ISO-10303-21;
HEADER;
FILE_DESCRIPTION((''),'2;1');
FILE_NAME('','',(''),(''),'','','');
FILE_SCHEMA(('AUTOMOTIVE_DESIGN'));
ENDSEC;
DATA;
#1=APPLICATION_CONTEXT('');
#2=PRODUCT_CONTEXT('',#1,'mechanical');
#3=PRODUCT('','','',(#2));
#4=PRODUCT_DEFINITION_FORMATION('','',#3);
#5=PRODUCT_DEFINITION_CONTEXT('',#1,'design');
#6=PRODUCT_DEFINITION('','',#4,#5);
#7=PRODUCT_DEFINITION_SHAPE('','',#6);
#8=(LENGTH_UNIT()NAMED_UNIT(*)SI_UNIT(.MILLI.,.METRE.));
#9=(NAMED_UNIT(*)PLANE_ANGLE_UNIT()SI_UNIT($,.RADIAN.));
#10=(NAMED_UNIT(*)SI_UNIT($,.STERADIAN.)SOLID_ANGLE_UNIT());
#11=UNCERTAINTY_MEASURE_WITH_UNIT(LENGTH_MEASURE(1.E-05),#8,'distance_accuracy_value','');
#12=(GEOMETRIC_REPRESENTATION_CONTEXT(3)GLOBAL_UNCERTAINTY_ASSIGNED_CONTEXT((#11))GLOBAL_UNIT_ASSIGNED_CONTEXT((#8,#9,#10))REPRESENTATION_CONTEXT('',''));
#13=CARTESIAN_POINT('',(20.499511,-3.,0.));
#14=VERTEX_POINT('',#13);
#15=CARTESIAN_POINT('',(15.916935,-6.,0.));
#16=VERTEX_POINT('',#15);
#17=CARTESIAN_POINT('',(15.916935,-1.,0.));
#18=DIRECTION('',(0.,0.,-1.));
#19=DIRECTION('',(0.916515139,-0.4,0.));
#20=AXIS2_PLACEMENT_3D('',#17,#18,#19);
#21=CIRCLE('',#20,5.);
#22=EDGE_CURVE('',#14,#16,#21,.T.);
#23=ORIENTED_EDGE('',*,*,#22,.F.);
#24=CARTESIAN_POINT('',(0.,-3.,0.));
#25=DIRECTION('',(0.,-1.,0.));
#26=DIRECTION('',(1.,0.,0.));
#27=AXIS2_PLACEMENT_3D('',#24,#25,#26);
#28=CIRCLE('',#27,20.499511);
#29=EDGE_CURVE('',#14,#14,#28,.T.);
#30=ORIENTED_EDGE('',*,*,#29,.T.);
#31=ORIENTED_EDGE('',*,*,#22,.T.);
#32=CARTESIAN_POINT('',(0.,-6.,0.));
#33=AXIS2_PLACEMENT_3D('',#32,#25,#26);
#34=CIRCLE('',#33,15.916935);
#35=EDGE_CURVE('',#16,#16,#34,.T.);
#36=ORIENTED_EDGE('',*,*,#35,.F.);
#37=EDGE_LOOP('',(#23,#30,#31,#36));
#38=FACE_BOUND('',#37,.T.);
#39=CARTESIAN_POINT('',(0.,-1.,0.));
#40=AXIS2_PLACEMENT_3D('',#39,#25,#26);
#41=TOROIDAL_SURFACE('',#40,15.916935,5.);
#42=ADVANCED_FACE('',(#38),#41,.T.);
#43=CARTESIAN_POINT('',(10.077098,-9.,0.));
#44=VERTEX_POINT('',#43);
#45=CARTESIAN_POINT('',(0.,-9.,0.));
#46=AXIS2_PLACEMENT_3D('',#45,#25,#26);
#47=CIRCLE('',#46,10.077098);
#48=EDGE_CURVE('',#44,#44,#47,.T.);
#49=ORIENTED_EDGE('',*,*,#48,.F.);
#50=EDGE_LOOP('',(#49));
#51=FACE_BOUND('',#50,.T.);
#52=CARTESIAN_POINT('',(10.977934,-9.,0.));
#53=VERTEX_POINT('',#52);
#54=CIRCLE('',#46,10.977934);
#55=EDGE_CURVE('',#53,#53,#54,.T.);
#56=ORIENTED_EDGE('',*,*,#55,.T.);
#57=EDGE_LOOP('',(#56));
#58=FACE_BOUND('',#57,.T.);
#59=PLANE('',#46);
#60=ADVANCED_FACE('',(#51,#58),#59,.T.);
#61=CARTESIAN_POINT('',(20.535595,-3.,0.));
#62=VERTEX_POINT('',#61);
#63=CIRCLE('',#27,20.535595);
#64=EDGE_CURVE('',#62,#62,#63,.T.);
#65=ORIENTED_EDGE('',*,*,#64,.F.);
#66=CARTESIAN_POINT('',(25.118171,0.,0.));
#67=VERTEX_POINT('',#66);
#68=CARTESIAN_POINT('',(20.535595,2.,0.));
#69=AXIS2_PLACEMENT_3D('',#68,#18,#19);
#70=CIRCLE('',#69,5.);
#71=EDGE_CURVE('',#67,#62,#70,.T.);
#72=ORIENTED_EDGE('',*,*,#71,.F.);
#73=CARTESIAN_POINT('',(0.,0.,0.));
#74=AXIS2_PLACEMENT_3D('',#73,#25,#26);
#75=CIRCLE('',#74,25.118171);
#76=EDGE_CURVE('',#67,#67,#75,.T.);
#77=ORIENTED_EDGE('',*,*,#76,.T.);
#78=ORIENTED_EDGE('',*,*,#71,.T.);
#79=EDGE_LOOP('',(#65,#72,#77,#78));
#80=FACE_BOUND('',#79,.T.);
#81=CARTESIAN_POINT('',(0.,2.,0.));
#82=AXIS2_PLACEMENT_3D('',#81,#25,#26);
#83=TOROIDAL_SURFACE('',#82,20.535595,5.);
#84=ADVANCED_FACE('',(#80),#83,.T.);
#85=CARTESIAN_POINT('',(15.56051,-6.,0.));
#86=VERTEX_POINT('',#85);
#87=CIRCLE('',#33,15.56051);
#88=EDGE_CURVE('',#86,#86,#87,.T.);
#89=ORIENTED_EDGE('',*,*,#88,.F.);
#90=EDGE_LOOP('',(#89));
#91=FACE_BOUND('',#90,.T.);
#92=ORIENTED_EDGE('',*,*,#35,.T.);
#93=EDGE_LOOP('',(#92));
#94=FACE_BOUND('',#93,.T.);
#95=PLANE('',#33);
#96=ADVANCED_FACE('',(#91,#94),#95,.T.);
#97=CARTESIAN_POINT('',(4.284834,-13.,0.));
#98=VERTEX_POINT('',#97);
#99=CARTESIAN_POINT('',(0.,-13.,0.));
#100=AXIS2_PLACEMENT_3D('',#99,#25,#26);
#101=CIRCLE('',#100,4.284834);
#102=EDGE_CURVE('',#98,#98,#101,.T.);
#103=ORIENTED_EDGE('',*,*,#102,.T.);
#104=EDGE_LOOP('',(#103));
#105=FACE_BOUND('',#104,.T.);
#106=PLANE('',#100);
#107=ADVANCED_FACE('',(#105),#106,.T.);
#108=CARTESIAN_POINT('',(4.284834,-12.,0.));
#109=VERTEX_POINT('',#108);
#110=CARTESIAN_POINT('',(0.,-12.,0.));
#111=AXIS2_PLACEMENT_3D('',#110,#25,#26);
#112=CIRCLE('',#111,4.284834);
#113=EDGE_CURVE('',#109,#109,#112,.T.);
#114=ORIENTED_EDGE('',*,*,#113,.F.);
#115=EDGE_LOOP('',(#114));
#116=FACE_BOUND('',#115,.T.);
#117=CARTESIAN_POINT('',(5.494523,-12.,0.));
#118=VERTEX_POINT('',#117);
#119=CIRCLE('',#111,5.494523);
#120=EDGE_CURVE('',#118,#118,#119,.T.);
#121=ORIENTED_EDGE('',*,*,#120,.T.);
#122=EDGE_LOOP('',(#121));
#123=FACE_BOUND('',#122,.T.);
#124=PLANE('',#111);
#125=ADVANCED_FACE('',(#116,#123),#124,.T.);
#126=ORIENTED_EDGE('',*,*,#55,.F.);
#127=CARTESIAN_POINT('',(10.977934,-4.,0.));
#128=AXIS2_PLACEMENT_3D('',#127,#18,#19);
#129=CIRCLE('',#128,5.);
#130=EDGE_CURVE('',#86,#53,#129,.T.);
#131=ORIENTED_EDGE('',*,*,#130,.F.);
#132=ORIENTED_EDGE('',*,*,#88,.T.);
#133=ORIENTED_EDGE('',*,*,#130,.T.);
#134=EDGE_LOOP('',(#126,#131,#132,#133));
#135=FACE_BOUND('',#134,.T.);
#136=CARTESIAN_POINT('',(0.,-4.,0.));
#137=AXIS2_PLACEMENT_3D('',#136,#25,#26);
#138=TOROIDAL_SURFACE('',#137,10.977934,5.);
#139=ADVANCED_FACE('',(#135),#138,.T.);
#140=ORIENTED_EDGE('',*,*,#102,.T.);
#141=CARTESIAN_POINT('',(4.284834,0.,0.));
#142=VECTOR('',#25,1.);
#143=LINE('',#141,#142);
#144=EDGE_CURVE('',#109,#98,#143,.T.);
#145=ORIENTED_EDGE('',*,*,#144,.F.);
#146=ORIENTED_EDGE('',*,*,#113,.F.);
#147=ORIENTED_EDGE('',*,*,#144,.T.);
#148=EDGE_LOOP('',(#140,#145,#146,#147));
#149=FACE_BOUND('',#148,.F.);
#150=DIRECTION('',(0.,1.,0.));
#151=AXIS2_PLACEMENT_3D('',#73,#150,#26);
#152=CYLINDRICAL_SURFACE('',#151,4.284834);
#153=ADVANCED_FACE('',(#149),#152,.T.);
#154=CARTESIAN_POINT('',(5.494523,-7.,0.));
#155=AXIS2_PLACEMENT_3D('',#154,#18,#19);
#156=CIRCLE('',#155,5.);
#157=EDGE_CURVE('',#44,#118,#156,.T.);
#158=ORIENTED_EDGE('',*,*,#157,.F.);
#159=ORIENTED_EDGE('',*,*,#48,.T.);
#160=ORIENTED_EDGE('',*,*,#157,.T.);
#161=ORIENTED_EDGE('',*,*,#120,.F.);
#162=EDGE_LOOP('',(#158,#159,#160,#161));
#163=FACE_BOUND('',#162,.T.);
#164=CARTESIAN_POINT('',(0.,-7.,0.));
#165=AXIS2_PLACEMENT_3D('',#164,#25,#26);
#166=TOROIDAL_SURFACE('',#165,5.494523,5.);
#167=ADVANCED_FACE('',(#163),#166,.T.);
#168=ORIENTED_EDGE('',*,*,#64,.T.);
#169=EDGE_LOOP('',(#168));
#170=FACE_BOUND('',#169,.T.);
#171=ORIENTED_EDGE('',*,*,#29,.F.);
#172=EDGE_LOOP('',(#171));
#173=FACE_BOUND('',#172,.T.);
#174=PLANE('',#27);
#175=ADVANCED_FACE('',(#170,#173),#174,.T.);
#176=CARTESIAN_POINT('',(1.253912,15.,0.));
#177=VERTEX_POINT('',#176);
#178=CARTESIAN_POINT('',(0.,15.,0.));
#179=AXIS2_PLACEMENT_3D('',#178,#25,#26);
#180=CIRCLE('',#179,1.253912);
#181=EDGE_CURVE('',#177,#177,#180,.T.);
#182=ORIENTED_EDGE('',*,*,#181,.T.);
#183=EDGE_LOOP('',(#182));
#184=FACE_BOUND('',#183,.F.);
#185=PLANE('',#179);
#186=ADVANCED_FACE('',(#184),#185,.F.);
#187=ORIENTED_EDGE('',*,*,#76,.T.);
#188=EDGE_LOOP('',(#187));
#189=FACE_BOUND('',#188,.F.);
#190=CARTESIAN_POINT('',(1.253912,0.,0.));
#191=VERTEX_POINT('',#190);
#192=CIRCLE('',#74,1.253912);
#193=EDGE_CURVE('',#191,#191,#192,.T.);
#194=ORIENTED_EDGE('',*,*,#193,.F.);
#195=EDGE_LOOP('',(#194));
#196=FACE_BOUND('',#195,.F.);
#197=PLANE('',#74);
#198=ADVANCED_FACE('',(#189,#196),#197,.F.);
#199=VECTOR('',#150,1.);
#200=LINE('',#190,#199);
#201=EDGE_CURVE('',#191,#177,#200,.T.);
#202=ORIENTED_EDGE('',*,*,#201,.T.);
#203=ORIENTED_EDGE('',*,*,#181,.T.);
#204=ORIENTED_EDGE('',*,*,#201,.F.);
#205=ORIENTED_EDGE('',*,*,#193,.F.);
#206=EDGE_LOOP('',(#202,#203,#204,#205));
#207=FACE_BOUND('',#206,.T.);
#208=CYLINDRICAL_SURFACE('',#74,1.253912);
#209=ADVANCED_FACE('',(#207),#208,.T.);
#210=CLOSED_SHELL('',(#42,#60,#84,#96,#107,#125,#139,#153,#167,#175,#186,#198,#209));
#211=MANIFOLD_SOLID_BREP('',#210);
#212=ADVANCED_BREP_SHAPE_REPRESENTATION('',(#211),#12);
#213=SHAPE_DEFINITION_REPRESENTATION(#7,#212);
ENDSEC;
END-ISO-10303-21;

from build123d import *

# Parameters (mm, degrees)
F0_R     = 25.1181711361
F0_R_2   = 20.4995111856
F1_DEPTH = 3
F0_R_3   = 15.560509686
F2_DEPTH = 6
F0_R_4   = 10.0770984701
F3_DEPTH = 9
F0_R_5   = 4.2848341216
F4_DEPTH = 12
F0_R_6   = 1.2539122761
F5_DEPTH = 13
F6_DEPTH = 13
F7_DEPTH = 15


# Not quite as in the source:
# - a fillet or chamfer that OpenCascade refuses, or shapes differently, is made with other operations: its cross-section is extruded or revolved along the edge and cut away or added


with BuildPart() as f1:
    # F0 (on Front) → F1 (new body)
    with BuildSketch(Plane.XZ):
        Circle(F0_R)
        Circle(F0_R_2, mode=Mode.SUBTRACT)
    extrude(amount=F1_DEPTH)

    # F0 (on Front) → F2 (join)
    with BuildSketch(Plane.XZ):
        Circle(F0_R_2)
        Circle(F0_R_3, mode=Mode.SUBTRACT)
    extrude(amount=F2_DEPTH)

    # F0 (on Front) → F3 (join)
    with BuildSketch(Plane.XZ):
        Circle(F0_R_3)
        Circle(F0_R_4, mode=Mode.SUBTRACT)
    extrude(amount=F3_DEPTH)

    # F0 (on Front) → F4 (join)
    with BuildSketch(Plane.XZ):
        Circle(F0_R_4)
        Circle(F0_R_5, mode=Mode.SUBTRACT)
    extrude(amount=F4_DEPTH)

    # F0 (on Front) → F5 (join)
    with BuildSketch(Plane.XZ):
        Circle(F0_R_5)
        Circle(F0_R_6, mode=Mode.SUBTRACT)
    extrude(amount=F5_DEPTH)

    # F0 (on Front) → F6 (join)
    with BuildSketch(Plane.XZ):
        Circle(F0_R_6)
    extrude(amount=F6_DEPTH)

    # F0 (on Front) → F7 (join)
    with BuildSketch(Plane.XZ):
        Circle(F0_R_6)
    extrude(amount=-F7_DEPTH)

    # F8: fillet of radius 5 on 4 edges, made by hand

    # F8_s1 → F8_t2 (revolve, cut)
    with BuildSketch(Plane.XY):
        with BuildLine():
            ThreePointArc((25.1181711361, 0), (23.2742082286, -2.1833001327), (20.5355954411, -3))
            Line((20.5355954411, -3), (25.1181711361, -3))
            Line((25.1181711361, -3), (25.1181711361, 0))
        make_face()
    revolve(axis=Axis((0, -3, 0), (0, -1, 0)), mode=Mode.SUBTRACT)

    # F8_s3 → F8_t4 (revolve, cut)
    with BuildSketch(Plane.XY):
        with BuildLine():
            ThreePointArc((20.4995111856, -3), (18.6555482782, -5.1833001327), (15.9169354907, -6))
            Line((15.9169354907, -6), (20.4995111856, -6))
            Line((20.4995111856, -6), (20.4995111856, -3))
        make_face()
    revolve(axis=Axis((0, -6, 0), (0, -1, 0)), mode=Mode.SUBTRACT)

    # F8_s5 → F8_t6 (revolve, cut)
    with BuildSketch(Plane.XY):
        with BuildLine():
            ThreePointArc((15.560509686, -6), (13.7165467785, -8.1833001327), (10.977933991, -9))
            Line((10.977933991, -9), (15.560509686, -9))
            Line((15.560509686, -9), (15.560509686, -6))
        make_face()
    revolve(axis=Axis((0, -9, 0), (0, -1, 0)), mode=Mode.SUBTRACT)

    # F8_s7 → F8_t8 (revolve, cut)
    with BuildSketch(Plane.XY):
        with BuildLine():
            ThreePointArc((10.0770984701, -9), (8.2331355627, -11.1833001327), (5.4945227752, -12))
            Line((5.4945227752, -12), (10.0770984701, -12))
            Line((10.0770984701, -12), (10.0770984701, -9))
        make_face()
    revolve(axis=Axis((0, -12, 0), (0, -1, 0)), mode=Mode.SUBTRACT)


solid = f1.part
